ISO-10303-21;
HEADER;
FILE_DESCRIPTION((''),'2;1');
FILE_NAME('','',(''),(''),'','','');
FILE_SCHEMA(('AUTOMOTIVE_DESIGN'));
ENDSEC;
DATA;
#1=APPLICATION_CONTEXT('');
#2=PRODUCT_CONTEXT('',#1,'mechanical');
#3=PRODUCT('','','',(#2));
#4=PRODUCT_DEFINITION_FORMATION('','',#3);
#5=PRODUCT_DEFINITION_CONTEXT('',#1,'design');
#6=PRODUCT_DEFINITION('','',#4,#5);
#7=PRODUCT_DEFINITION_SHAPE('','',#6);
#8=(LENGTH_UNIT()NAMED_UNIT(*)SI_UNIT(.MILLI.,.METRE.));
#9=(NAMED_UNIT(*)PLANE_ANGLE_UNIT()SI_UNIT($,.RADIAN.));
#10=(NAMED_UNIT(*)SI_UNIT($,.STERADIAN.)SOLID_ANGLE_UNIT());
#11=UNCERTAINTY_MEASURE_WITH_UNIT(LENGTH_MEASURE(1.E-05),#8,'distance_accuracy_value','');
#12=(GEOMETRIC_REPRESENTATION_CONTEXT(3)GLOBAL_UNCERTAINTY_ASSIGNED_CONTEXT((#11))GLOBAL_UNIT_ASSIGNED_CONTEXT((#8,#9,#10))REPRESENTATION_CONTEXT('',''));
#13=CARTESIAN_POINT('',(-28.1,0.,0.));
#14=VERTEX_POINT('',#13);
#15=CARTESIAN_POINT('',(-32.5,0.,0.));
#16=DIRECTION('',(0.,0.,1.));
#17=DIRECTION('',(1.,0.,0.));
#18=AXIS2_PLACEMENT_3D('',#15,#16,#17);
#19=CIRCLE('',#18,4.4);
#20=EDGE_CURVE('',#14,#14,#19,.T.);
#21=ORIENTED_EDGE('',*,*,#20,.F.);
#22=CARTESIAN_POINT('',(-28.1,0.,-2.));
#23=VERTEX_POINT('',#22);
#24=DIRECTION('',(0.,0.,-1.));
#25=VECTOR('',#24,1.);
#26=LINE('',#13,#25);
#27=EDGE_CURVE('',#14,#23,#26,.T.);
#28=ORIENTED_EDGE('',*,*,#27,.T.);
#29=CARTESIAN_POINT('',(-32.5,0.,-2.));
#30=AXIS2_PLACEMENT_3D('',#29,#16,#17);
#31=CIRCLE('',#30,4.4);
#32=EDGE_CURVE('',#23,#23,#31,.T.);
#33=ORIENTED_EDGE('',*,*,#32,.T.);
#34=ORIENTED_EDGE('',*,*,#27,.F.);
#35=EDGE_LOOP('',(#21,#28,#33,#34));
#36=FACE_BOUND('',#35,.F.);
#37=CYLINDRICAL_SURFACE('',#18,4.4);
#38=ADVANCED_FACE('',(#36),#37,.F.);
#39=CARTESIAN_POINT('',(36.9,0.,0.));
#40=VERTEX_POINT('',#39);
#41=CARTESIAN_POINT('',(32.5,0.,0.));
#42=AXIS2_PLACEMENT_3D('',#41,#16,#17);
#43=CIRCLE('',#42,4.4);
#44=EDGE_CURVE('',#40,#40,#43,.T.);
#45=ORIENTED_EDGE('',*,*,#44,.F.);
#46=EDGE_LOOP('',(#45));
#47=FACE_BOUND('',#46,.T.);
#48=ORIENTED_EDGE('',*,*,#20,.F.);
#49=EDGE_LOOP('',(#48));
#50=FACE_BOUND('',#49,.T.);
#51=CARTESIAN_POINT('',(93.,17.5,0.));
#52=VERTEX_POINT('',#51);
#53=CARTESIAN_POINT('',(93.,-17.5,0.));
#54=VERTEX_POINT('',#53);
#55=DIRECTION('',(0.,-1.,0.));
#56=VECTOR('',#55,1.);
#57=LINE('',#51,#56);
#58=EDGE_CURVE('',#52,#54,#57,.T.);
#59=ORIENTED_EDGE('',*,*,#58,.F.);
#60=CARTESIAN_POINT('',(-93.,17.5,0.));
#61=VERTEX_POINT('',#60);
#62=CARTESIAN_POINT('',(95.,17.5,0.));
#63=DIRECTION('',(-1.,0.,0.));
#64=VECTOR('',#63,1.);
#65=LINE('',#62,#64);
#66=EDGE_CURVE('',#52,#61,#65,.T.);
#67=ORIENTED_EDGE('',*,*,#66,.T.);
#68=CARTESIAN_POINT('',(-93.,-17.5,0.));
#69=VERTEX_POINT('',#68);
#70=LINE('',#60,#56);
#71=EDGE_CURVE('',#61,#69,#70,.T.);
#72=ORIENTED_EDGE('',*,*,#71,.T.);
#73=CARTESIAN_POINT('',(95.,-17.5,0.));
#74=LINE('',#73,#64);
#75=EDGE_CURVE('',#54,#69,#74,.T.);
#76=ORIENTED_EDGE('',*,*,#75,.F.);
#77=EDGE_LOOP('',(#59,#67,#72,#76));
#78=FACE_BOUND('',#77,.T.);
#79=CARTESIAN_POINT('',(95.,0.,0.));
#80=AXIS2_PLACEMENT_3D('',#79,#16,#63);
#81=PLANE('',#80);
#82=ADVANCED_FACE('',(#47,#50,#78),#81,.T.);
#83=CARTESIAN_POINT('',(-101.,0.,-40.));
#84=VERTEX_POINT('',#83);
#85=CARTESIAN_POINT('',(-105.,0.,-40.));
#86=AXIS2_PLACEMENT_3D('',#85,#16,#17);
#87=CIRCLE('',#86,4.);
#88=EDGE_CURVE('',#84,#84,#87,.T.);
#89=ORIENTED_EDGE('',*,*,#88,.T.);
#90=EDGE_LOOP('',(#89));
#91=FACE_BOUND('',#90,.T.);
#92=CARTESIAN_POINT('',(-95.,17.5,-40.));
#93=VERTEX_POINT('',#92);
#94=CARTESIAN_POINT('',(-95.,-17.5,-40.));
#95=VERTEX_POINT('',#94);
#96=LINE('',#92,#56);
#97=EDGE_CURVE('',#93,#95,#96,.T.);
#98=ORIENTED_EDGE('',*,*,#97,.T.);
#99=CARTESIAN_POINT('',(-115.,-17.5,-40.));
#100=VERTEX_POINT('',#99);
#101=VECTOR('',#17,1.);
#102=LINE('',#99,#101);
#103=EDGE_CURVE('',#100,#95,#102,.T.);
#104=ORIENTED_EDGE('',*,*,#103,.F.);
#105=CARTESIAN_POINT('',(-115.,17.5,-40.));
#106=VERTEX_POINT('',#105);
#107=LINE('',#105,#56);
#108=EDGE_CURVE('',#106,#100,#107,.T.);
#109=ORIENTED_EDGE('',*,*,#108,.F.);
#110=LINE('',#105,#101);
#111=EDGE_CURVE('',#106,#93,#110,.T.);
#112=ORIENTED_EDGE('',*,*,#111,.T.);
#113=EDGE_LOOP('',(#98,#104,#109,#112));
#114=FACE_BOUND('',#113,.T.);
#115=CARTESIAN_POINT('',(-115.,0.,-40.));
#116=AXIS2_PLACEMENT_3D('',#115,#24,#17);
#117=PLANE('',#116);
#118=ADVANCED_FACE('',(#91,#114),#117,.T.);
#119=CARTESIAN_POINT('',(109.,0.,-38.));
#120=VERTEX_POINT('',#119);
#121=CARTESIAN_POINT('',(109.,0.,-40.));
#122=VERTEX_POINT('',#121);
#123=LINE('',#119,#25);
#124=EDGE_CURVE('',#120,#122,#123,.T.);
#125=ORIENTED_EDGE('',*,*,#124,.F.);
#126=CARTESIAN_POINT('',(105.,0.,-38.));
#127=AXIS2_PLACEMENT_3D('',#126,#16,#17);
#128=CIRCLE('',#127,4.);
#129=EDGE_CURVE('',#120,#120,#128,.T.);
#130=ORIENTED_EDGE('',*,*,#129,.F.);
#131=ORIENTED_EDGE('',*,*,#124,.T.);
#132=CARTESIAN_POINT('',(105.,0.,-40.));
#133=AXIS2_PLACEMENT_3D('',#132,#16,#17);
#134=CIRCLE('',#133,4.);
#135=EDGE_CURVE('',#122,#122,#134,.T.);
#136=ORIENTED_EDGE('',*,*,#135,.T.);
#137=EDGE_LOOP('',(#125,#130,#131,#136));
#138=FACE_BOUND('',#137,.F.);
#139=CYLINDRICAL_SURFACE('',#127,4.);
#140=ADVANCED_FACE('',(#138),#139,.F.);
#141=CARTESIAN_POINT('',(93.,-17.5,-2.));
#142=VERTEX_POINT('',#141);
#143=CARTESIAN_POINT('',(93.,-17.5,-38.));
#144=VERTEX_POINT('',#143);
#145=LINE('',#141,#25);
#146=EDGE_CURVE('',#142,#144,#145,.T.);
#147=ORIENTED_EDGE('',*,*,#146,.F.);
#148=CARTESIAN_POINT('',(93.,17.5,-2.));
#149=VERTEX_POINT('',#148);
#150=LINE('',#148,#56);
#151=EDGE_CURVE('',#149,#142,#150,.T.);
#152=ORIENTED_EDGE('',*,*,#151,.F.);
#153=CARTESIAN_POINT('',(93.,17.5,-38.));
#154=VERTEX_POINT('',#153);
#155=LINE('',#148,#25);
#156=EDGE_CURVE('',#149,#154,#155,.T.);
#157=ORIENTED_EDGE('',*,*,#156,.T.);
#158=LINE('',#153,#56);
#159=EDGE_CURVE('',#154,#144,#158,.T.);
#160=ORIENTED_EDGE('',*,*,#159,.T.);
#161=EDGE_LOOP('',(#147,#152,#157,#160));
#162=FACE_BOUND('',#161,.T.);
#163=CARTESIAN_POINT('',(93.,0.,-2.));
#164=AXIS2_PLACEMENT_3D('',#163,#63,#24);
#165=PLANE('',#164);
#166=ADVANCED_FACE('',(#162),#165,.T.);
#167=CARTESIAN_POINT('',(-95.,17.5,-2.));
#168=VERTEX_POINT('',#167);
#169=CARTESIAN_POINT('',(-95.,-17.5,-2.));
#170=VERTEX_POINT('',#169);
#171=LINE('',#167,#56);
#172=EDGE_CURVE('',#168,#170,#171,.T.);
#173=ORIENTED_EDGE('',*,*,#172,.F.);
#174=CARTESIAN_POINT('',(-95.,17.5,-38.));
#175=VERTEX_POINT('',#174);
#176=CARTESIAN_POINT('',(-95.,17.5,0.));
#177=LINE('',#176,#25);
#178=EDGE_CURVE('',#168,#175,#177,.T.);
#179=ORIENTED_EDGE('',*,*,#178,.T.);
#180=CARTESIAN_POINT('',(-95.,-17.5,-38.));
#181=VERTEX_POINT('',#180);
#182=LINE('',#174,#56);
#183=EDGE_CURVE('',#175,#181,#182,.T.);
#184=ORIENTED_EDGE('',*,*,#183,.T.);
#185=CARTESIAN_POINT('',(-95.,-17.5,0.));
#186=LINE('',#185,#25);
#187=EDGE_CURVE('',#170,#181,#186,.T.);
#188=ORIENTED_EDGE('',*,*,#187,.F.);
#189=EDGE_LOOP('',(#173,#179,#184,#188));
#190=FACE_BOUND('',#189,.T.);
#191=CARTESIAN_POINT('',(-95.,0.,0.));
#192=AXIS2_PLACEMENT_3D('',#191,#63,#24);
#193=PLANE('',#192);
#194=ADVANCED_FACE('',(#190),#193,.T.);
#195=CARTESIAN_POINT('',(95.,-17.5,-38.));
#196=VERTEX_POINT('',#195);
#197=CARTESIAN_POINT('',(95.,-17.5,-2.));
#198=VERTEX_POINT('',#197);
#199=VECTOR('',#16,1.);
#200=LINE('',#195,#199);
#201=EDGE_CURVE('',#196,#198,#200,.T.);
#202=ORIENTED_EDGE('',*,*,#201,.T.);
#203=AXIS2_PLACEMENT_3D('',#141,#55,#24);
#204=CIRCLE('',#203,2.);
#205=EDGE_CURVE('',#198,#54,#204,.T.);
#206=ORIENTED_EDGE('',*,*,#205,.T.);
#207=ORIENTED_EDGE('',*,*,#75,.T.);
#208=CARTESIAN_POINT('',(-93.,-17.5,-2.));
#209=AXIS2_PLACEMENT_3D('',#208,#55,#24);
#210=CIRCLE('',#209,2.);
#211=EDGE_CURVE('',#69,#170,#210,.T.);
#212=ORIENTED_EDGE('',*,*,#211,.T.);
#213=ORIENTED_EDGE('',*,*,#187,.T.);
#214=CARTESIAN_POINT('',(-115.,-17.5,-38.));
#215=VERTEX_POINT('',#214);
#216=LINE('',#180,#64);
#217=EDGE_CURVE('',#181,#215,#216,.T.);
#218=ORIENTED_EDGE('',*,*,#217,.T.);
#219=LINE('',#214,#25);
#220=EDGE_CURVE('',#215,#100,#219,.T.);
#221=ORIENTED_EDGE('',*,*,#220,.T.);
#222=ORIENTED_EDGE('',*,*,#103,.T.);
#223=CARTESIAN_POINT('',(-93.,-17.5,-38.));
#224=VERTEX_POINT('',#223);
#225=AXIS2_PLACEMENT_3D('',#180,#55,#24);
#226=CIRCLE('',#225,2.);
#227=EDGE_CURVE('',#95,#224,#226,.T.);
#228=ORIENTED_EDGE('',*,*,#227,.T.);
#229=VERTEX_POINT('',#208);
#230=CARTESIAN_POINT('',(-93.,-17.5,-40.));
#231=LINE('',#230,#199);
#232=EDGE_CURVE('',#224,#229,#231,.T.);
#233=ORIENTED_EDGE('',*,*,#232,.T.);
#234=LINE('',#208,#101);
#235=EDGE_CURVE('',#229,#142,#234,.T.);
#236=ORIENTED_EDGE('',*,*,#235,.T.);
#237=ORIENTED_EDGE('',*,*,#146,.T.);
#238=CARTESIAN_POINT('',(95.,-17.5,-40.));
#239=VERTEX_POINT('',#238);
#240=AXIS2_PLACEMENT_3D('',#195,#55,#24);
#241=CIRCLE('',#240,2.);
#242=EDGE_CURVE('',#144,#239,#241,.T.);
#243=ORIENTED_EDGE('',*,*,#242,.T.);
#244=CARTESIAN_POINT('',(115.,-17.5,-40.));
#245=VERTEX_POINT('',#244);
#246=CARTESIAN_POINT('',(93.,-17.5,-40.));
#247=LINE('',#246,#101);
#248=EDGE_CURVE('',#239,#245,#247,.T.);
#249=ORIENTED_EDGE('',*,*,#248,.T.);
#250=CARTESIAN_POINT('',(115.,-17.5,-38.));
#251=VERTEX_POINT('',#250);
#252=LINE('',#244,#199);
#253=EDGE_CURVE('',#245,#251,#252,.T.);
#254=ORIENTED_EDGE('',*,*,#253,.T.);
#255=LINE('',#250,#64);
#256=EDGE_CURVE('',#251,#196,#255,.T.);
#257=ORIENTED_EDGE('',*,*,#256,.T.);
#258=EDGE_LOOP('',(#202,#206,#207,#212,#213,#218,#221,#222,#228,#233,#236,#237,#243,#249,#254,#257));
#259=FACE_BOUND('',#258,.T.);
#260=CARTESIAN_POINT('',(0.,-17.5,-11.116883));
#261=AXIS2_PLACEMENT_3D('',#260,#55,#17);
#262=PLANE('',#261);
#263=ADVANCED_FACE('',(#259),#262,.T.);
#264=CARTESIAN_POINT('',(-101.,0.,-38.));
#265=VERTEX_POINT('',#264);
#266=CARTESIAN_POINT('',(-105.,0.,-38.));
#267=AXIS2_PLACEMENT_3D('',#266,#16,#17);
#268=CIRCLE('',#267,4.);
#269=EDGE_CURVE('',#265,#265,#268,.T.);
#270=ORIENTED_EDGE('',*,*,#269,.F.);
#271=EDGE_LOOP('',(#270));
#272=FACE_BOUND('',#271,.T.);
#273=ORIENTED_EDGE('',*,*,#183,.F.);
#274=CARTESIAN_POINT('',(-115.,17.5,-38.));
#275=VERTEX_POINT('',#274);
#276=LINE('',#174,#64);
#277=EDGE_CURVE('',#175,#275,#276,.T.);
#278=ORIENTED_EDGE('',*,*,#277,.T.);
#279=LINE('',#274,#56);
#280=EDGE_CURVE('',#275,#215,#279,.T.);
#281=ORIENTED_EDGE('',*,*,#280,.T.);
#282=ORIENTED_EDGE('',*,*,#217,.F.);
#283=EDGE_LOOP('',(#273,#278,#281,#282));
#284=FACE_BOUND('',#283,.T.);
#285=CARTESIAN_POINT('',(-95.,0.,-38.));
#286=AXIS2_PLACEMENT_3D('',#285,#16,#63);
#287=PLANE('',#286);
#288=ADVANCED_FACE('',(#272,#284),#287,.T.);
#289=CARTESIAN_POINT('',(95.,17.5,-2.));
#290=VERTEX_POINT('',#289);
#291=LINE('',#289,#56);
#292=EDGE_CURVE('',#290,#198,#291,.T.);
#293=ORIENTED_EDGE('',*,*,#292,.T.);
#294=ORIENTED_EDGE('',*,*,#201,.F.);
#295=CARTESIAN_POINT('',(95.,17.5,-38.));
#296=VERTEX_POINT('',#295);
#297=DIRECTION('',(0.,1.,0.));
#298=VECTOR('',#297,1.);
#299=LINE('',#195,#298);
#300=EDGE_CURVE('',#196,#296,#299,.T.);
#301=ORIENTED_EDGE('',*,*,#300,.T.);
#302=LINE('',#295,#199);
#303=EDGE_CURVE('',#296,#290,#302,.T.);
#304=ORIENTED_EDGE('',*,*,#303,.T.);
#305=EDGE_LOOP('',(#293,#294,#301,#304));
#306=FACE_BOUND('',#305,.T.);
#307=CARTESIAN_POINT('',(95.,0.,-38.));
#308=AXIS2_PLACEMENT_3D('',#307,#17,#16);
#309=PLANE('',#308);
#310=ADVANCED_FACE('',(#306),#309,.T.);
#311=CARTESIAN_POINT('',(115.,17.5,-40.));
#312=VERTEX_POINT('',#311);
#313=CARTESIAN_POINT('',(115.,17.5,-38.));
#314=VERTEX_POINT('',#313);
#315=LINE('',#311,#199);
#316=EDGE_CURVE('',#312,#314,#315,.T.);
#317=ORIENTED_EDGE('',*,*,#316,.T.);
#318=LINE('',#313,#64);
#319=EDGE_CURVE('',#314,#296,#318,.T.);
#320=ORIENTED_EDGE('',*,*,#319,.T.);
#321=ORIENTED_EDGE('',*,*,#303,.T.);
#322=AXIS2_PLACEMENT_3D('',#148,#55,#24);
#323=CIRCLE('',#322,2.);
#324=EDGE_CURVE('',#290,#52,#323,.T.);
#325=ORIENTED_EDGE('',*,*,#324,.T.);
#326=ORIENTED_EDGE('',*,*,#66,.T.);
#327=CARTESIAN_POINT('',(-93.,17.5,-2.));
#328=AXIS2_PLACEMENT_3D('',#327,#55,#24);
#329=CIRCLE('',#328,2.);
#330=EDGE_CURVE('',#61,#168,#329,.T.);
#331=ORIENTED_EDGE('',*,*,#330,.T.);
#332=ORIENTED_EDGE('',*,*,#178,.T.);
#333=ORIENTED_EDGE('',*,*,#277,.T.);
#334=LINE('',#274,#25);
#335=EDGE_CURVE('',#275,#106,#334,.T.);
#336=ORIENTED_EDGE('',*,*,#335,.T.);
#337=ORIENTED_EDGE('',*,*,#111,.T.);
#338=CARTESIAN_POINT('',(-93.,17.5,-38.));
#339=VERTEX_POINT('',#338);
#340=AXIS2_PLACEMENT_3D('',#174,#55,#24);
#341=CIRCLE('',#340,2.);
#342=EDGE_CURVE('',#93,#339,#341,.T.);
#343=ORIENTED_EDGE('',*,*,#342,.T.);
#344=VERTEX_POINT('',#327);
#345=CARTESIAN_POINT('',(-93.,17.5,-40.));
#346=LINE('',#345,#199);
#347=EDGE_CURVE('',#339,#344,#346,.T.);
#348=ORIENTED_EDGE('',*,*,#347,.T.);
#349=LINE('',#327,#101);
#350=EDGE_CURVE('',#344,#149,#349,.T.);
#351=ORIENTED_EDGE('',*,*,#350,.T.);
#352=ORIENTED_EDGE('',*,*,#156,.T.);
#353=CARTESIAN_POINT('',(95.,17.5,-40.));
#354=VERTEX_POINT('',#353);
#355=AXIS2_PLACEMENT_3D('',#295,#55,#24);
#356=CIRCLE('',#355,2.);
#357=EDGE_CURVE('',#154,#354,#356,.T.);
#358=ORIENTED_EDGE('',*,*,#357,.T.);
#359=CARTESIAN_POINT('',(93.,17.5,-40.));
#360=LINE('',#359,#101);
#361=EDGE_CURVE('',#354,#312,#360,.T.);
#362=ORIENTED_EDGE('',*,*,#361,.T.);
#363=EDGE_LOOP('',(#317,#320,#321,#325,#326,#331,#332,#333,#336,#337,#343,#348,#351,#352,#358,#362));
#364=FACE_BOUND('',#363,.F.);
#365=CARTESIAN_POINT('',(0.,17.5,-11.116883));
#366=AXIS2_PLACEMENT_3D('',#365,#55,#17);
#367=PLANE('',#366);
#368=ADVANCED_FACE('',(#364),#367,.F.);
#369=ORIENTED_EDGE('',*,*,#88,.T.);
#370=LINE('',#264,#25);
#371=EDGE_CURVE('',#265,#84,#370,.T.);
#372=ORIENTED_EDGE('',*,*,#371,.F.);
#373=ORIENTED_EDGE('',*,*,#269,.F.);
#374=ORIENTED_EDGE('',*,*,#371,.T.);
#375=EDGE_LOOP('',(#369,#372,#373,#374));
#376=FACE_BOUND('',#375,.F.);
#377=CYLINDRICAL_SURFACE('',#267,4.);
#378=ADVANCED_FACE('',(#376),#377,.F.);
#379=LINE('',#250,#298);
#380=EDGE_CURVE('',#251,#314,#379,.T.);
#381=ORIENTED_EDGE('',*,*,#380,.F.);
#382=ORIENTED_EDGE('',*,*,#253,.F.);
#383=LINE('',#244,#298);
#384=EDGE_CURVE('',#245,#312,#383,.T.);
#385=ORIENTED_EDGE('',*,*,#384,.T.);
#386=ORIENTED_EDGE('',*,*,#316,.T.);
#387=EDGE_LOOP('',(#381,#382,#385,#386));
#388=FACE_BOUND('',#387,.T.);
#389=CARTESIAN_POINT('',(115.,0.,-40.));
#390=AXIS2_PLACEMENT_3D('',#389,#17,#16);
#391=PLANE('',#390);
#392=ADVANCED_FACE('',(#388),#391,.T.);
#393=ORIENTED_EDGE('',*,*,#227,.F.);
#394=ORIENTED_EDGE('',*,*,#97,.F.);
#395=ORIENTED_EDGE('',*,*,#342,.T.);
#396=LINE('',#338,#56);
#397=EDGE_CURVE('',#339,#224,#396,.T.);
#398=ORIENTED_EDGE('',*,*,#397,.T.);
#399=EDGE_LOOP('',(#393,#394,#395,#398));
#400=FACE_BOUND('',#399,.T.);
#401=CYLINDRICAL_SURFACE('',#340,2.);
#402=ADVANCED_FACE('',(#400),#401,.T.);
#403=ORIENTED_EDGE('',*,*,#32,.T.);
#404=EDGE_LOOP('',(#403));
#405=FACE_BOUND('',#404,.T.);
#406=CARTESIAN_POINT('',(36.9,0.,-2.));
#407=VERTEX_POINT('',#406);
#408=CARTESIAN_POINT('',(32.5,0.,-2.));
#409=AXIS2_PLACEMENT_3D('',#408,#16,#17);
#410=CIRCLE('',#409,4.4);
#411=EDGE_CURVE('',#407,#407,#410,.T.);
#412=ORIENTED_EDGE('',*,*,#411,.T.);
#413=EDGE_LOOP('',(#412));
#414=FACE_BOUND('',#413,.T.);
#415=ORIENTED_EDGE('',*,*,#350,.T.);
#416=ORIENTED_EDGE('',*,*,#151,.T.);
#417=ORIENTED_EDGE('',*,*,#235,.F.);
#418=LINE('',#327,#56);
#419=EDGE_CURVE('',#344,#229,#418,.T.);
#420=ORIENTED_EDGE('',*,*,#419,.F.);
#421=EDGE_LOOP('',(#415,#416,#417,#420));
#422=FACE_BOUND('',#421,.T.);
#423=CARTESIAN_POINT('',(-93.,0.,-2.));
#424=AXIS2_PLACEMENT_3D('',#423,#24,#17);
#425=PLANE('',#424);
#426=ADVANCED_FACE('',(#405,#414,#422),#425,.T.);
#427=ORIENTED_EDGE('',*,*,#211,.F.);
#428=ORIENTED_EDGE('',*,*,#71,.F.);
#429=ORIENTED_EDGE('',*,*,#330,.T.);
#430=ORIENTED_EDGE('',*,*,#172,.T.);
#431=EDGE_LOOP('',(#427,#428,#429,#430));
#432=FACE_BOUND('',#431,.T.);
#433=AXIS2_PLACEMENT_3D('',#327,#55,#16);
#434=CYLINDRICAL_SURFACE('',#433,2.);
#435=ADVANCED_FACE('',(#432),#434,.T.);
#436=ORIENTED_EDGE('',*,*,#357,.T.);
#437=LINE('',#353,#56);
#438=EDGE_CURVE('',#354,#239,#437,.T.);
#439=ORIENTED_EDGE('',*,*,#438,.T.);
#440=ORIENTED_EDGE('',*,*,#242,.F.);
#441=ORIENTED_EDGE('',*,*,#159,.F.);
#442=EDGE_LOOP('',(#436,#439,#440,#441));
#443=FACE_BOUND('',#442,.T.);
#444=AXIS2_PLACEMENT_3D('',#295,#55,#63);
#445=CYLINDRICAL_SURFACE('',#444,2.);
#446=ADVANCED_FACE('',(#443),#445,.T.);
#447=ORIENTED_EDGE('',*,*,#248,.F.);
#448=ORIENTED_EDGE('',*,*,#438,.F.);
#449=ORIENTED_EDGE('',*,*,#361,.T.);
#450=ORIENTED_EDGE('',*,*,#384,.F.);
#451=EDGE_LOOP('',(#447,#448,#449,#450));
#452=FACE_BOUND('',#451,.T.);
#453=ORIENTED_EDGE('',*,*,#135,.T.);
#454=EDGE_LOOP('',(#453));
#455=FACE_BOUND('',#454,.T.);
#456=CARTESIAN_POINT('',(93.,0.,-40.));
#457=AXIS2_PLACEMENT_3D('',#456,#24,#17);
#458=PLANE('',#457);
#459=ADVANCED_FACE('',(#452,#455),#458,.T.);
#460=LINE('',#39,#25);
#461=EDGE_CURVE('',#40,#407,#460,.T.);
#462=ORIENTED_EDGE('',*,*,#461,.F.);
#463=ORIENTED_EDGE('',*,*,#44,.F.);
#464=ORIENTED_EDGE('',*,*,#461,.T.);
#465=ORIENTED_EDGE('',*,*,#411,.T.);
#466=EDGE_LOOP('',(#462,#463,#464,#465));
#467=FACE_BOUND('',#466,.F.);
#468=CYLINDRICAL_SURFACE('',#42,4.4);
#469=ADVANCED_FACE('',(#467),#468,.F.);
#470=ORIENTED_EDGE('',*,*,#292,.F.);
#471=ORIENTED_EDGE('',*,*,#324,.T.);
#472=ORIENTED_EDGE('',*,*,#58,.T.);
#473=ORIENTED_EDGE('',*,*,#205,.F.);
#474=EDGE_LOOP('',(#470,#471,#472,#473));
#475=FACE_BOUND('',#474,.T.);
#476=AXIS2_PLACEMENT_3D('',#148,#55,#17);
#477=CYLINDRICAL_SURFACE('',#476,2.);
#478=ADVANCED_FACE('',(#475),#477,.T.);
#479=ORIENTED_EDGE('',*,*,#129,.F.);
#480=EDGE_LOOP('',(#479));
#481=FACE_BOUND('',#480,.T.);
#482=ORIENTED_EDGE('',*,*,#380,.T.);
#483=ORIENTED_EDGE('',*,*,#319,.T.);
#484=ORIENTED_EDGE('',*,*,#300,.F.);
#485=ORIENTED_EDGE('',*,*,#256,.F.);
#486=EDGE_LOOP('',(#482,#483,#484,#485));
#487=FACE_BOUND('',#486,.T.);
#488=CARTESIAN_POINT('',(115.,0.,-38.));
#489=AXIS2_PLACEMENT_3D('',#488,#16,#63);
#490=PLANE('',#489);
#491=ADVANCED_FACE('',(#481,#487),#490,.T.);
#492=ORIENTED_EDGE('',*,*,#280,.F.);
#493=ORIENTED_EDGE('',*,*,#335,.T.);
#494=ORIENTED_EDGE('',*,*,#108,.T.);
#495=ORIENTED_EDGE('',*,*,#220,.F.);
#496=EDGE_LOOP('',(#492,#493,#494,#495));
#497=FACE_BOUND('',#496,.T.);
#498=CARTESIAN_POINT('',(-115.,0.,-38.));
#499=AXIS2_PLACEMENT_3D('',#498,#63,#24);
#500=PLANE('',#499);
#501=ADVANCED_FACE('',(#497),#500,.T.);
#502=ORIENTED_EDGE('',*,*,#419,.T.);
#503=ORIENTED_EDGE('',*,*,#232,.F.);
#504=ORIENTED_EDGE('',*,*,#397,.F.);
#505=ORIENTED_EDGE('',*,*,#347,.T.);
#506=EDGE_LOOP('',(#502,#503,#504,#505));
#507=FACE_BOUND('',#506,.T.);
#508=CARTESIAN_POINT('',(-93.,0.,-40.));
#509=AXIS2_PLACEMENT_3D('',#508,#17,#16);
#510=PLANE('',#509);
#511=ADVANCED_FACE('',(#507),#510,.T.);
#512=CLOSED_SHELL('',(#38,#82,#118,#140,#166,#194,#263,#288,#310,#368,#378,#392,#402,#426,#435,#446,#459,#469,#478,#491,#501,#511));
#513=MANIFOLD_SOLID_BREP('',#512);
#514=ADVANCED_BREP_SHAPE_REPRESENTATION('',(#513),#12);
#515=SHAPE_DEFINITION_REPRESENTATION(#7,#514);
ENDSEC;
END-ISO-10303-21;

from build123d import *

# Parameters (mm, degrees)
F1_DEPTH = 17.5
F2_R     = 4
F3_DEPTH = 25
F4_R     = 4.4
F5_DEPTH = 25
F6_R     = 2


# Not quite as in the source:
# - a feature names something its author has since deleted; it is built from what else it names


with BuildPart() as f1:
    # F0 (on Front) → F1 (new body, symmetric)
    with BuildSketch(Plane.XZ):
        Polygon((95, -38), (95, 0), (-95, 0), (-95, -38), (-115, -38), (-115, -40), (-93, -40), (-93, -2), (93, -2), (93, -40), (115, -40), (115, -38), align=None)
    extrude(amount=F1_DEPTH, both=True)

    # F2 (on face) → F3 (cut)
    with BuildSketch(Plane.XY.offset(-38)):
        with Locations((-105, 0)):
            Circle(F2_R)
        with Locations((105, 0)):
            Circle(F2_R)
    extrude(amount=-F3_DEPTH, mode=Mode.SUBTRACT)

    # F4 (on face) → F5 (cut)
    with BuildSketch(Plane.XY):
        with Locations((-32.5, 0)):
            Circle(F4_R)
        with Locations((32.5, 0)):
            Circle(F4_R)
    extrude(amount=-F5_DEPTH, mode=Mode.SUBTRACT)

    # F6
    f6_edges = [f1.edges().sort_by_distance(p)[0] for p in [
        (95, 0, 0),
        (-95, 0, 0),
        (-93, 0, -40),
        (93, 0, -40),
    ]]
    fillet(f6_edges, radius=F6_R)


solid = f1.part
